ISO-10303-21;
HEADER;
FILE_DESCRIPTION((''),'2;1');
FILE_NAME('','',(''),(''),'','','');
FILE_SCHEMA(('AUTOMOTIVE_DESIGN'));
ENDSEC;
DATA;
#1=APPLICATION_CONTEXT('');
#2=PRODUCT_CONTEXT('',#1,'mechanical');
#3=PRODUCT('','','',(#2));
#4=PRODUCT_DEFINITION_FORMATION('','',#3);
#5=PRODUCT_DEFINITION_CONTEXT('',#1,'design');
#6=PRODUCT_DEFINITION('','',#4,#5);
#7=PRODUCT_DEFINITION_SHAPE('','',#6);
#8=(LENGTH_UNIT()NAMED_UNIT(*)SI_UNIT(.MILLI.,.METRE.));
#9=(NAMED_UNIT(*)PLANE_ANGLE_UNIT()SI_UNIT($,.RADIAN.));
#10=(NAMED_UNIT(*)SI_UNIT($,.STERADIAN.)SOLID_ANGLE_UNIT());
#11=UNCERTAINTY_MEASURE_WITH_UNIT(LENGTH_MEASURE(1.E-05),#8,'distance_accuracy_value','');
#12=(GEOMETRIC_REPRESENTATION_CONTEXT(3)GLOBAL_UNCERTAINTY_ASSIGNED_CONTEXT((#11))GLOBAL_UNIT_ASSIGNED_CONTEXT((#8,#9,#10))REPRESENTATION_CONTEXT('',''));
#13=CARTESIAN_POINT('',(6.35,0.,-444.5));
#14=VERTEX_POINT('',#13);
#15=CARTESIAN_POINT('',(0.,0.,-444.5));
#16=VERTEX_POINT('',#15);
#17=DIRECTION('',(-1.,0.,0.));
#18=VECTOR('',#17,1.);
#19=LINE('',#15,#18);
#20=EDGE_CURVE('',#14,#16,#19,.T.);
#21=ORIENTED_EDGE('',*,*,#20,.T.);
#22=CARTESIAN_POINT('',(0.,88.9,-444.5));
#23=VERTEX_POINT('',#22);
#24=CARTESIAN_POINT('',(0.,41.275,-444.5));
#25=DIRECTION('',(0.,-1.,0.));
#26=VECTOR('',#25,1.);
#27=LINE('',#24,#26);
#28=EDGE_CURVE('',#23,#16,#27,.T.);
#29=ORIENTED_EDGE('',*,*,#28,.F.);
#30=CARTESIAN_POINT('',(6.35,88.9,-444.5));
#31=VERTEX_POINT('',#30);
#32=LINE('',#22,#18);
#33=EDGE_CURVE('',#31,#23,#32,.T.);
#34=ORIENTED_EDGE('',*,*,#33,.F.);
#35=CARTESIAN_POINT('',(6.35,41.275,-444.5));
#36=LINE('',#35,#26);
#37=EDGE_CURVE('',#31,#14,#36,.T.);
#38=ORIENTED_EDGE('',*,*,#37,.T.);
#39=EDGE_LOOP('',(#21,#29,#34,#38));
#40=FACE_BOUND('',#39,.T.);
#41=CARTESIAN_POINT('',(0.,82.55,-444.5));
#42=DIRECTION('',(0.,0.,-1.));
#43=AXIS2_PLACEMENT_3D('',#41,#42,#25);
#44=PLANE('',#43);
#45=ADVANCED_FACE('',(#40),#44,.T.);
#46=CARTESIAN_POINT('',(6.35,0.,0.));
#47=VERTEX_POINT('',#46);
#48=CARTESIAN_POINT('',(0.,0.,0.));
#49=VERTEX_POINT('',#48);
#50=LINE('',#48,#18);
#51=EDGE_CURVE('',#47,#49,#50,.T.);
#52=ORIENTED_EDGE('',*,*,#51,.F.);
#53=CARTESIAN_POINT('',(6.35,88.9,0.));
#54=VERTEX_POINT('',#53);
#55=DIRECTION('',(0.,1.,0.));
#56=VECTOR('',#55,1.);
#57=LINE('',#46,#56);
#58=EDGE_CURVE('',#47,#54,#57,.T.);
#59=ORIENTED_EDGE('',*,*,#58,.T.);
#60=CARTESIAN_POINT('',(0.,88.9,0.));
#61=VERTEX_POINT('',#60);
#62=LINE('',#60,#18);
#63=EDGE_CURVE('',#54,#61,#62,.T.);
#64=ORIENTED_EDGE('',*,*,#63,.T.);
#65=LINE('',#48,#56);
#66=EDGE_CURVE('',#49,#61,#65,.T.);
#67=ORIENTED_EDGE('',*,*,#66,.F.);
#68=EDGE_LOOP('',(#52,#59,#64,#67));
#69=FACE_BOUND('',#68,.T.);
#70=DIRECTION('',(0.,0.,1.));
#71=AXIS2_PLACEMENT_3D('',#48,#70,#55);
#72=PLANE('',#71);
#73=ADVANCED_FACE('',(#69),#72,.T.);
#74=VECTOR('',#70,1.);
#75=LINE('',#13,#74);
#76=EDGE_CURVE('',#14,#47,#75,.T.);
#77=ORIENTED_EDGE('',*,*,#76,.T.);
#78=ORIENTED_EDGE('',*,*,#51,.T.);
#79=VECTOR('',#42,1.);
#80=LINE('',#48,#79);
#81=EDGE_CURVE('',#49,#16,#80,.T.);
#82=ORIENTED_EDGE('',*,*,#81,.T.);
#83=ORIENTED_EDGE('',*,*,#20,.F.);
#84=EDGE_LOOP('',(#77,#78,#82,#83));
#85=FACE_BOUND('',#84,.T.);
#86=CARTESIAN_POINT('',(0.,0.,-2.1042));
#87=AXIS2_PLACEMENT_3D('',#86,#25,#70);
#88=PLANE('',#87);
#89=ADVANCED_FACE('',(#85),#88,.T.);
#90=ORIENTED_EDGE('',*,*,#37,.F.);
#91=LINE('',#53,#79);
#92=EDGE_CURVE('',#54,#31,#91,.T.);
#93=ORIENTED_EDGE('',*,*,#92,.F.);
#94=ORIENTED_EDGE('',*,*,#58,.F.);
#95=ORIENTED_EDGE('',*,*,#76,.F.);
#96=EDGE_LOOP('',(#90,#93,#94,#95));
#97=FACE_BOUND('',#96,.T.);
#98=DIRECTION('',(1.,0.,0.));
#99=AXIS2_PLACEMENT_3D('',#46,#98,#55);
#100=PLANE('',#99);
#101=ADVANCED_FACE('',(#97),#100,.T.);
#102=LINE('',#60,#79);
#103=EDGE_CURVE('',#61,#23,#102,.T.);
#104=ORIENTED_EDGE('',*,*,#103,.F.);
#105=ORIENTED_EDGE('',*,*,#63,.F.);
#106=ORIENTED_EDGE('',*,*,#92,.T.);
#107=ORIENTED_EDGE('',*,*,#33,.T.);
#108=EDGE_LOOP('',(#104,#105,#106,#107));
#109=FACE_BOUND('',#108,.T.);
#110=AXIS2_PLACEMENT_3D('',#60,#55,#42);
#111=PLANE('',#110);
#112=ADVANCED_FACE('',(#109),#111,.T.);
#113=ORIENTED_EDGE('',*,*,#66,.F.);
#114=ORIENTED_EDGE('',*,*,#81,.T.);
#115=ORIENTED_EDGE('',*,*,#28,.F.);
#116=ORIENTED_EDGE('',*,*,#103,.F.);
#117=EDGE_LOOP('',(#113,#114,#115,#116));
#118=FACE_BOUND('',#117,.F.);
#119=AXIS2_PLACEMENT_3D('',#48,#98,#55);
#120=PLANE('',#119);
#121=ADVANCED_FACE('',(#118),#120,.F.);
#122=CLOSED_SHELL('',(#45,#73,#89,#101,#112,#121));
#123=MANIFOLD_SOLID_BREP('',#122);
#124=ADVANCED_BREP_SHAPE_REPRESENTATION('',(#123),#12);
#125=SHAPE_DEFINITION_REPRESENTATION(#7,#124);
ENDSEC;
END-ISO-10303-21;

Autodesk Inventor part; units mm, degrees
ref_plane "YZ Plane" through (0, 0, 0) normal (1, 0, 0) x (0, 1, 0)
ref_plane "XZ Plane" through (0, 0, 0) normal (0, 1, 0) x (-1, 0, 0)
ref_plane "XY Plane" through (0, 0, 0) normal (0, 0, 1) x (1, 0, 0)
sketch "Sketch1" plane through (0, 0, 0) normal (1, 0, 0) x (0, 1, 0)
  line L0 (444.5, 0) -> (444.5, -2.1042)
  line L1 (0, -2.1042) -> (0, 0)
  line L2 (0, -74.1174) -> (0, -66.8433)
  line L3 (0, 0) -> (82.55, 0)
  line L4 (82.55, 0) -> (82.55, -444.5)
  line L5 (82.55, -444.5) -> (0, -444.5)
  line L6 (0, -444.5) -> (0, 0)
  point P0 (25.4, -50.8)
  point P1 (25.4, -393.7)
  dimension "d2" = 82.55
  dimension "d3" = 444.5
  dimension "d4" = 50.8
  dimension "d5" = 25.4
  dimension "d6" = 50.8
  dimension "d7" = 25.4
extrude "Extrusion1" add sketch "Sketch1" along normal blind 6.35
thicken "Thicken1" operation add thickness 6.35 both sides no extend neighbours yes toward (0, 1, 0) faces at (2.1167, 82.55, -148.1667)
properties part number "DriveTrainPlate"
